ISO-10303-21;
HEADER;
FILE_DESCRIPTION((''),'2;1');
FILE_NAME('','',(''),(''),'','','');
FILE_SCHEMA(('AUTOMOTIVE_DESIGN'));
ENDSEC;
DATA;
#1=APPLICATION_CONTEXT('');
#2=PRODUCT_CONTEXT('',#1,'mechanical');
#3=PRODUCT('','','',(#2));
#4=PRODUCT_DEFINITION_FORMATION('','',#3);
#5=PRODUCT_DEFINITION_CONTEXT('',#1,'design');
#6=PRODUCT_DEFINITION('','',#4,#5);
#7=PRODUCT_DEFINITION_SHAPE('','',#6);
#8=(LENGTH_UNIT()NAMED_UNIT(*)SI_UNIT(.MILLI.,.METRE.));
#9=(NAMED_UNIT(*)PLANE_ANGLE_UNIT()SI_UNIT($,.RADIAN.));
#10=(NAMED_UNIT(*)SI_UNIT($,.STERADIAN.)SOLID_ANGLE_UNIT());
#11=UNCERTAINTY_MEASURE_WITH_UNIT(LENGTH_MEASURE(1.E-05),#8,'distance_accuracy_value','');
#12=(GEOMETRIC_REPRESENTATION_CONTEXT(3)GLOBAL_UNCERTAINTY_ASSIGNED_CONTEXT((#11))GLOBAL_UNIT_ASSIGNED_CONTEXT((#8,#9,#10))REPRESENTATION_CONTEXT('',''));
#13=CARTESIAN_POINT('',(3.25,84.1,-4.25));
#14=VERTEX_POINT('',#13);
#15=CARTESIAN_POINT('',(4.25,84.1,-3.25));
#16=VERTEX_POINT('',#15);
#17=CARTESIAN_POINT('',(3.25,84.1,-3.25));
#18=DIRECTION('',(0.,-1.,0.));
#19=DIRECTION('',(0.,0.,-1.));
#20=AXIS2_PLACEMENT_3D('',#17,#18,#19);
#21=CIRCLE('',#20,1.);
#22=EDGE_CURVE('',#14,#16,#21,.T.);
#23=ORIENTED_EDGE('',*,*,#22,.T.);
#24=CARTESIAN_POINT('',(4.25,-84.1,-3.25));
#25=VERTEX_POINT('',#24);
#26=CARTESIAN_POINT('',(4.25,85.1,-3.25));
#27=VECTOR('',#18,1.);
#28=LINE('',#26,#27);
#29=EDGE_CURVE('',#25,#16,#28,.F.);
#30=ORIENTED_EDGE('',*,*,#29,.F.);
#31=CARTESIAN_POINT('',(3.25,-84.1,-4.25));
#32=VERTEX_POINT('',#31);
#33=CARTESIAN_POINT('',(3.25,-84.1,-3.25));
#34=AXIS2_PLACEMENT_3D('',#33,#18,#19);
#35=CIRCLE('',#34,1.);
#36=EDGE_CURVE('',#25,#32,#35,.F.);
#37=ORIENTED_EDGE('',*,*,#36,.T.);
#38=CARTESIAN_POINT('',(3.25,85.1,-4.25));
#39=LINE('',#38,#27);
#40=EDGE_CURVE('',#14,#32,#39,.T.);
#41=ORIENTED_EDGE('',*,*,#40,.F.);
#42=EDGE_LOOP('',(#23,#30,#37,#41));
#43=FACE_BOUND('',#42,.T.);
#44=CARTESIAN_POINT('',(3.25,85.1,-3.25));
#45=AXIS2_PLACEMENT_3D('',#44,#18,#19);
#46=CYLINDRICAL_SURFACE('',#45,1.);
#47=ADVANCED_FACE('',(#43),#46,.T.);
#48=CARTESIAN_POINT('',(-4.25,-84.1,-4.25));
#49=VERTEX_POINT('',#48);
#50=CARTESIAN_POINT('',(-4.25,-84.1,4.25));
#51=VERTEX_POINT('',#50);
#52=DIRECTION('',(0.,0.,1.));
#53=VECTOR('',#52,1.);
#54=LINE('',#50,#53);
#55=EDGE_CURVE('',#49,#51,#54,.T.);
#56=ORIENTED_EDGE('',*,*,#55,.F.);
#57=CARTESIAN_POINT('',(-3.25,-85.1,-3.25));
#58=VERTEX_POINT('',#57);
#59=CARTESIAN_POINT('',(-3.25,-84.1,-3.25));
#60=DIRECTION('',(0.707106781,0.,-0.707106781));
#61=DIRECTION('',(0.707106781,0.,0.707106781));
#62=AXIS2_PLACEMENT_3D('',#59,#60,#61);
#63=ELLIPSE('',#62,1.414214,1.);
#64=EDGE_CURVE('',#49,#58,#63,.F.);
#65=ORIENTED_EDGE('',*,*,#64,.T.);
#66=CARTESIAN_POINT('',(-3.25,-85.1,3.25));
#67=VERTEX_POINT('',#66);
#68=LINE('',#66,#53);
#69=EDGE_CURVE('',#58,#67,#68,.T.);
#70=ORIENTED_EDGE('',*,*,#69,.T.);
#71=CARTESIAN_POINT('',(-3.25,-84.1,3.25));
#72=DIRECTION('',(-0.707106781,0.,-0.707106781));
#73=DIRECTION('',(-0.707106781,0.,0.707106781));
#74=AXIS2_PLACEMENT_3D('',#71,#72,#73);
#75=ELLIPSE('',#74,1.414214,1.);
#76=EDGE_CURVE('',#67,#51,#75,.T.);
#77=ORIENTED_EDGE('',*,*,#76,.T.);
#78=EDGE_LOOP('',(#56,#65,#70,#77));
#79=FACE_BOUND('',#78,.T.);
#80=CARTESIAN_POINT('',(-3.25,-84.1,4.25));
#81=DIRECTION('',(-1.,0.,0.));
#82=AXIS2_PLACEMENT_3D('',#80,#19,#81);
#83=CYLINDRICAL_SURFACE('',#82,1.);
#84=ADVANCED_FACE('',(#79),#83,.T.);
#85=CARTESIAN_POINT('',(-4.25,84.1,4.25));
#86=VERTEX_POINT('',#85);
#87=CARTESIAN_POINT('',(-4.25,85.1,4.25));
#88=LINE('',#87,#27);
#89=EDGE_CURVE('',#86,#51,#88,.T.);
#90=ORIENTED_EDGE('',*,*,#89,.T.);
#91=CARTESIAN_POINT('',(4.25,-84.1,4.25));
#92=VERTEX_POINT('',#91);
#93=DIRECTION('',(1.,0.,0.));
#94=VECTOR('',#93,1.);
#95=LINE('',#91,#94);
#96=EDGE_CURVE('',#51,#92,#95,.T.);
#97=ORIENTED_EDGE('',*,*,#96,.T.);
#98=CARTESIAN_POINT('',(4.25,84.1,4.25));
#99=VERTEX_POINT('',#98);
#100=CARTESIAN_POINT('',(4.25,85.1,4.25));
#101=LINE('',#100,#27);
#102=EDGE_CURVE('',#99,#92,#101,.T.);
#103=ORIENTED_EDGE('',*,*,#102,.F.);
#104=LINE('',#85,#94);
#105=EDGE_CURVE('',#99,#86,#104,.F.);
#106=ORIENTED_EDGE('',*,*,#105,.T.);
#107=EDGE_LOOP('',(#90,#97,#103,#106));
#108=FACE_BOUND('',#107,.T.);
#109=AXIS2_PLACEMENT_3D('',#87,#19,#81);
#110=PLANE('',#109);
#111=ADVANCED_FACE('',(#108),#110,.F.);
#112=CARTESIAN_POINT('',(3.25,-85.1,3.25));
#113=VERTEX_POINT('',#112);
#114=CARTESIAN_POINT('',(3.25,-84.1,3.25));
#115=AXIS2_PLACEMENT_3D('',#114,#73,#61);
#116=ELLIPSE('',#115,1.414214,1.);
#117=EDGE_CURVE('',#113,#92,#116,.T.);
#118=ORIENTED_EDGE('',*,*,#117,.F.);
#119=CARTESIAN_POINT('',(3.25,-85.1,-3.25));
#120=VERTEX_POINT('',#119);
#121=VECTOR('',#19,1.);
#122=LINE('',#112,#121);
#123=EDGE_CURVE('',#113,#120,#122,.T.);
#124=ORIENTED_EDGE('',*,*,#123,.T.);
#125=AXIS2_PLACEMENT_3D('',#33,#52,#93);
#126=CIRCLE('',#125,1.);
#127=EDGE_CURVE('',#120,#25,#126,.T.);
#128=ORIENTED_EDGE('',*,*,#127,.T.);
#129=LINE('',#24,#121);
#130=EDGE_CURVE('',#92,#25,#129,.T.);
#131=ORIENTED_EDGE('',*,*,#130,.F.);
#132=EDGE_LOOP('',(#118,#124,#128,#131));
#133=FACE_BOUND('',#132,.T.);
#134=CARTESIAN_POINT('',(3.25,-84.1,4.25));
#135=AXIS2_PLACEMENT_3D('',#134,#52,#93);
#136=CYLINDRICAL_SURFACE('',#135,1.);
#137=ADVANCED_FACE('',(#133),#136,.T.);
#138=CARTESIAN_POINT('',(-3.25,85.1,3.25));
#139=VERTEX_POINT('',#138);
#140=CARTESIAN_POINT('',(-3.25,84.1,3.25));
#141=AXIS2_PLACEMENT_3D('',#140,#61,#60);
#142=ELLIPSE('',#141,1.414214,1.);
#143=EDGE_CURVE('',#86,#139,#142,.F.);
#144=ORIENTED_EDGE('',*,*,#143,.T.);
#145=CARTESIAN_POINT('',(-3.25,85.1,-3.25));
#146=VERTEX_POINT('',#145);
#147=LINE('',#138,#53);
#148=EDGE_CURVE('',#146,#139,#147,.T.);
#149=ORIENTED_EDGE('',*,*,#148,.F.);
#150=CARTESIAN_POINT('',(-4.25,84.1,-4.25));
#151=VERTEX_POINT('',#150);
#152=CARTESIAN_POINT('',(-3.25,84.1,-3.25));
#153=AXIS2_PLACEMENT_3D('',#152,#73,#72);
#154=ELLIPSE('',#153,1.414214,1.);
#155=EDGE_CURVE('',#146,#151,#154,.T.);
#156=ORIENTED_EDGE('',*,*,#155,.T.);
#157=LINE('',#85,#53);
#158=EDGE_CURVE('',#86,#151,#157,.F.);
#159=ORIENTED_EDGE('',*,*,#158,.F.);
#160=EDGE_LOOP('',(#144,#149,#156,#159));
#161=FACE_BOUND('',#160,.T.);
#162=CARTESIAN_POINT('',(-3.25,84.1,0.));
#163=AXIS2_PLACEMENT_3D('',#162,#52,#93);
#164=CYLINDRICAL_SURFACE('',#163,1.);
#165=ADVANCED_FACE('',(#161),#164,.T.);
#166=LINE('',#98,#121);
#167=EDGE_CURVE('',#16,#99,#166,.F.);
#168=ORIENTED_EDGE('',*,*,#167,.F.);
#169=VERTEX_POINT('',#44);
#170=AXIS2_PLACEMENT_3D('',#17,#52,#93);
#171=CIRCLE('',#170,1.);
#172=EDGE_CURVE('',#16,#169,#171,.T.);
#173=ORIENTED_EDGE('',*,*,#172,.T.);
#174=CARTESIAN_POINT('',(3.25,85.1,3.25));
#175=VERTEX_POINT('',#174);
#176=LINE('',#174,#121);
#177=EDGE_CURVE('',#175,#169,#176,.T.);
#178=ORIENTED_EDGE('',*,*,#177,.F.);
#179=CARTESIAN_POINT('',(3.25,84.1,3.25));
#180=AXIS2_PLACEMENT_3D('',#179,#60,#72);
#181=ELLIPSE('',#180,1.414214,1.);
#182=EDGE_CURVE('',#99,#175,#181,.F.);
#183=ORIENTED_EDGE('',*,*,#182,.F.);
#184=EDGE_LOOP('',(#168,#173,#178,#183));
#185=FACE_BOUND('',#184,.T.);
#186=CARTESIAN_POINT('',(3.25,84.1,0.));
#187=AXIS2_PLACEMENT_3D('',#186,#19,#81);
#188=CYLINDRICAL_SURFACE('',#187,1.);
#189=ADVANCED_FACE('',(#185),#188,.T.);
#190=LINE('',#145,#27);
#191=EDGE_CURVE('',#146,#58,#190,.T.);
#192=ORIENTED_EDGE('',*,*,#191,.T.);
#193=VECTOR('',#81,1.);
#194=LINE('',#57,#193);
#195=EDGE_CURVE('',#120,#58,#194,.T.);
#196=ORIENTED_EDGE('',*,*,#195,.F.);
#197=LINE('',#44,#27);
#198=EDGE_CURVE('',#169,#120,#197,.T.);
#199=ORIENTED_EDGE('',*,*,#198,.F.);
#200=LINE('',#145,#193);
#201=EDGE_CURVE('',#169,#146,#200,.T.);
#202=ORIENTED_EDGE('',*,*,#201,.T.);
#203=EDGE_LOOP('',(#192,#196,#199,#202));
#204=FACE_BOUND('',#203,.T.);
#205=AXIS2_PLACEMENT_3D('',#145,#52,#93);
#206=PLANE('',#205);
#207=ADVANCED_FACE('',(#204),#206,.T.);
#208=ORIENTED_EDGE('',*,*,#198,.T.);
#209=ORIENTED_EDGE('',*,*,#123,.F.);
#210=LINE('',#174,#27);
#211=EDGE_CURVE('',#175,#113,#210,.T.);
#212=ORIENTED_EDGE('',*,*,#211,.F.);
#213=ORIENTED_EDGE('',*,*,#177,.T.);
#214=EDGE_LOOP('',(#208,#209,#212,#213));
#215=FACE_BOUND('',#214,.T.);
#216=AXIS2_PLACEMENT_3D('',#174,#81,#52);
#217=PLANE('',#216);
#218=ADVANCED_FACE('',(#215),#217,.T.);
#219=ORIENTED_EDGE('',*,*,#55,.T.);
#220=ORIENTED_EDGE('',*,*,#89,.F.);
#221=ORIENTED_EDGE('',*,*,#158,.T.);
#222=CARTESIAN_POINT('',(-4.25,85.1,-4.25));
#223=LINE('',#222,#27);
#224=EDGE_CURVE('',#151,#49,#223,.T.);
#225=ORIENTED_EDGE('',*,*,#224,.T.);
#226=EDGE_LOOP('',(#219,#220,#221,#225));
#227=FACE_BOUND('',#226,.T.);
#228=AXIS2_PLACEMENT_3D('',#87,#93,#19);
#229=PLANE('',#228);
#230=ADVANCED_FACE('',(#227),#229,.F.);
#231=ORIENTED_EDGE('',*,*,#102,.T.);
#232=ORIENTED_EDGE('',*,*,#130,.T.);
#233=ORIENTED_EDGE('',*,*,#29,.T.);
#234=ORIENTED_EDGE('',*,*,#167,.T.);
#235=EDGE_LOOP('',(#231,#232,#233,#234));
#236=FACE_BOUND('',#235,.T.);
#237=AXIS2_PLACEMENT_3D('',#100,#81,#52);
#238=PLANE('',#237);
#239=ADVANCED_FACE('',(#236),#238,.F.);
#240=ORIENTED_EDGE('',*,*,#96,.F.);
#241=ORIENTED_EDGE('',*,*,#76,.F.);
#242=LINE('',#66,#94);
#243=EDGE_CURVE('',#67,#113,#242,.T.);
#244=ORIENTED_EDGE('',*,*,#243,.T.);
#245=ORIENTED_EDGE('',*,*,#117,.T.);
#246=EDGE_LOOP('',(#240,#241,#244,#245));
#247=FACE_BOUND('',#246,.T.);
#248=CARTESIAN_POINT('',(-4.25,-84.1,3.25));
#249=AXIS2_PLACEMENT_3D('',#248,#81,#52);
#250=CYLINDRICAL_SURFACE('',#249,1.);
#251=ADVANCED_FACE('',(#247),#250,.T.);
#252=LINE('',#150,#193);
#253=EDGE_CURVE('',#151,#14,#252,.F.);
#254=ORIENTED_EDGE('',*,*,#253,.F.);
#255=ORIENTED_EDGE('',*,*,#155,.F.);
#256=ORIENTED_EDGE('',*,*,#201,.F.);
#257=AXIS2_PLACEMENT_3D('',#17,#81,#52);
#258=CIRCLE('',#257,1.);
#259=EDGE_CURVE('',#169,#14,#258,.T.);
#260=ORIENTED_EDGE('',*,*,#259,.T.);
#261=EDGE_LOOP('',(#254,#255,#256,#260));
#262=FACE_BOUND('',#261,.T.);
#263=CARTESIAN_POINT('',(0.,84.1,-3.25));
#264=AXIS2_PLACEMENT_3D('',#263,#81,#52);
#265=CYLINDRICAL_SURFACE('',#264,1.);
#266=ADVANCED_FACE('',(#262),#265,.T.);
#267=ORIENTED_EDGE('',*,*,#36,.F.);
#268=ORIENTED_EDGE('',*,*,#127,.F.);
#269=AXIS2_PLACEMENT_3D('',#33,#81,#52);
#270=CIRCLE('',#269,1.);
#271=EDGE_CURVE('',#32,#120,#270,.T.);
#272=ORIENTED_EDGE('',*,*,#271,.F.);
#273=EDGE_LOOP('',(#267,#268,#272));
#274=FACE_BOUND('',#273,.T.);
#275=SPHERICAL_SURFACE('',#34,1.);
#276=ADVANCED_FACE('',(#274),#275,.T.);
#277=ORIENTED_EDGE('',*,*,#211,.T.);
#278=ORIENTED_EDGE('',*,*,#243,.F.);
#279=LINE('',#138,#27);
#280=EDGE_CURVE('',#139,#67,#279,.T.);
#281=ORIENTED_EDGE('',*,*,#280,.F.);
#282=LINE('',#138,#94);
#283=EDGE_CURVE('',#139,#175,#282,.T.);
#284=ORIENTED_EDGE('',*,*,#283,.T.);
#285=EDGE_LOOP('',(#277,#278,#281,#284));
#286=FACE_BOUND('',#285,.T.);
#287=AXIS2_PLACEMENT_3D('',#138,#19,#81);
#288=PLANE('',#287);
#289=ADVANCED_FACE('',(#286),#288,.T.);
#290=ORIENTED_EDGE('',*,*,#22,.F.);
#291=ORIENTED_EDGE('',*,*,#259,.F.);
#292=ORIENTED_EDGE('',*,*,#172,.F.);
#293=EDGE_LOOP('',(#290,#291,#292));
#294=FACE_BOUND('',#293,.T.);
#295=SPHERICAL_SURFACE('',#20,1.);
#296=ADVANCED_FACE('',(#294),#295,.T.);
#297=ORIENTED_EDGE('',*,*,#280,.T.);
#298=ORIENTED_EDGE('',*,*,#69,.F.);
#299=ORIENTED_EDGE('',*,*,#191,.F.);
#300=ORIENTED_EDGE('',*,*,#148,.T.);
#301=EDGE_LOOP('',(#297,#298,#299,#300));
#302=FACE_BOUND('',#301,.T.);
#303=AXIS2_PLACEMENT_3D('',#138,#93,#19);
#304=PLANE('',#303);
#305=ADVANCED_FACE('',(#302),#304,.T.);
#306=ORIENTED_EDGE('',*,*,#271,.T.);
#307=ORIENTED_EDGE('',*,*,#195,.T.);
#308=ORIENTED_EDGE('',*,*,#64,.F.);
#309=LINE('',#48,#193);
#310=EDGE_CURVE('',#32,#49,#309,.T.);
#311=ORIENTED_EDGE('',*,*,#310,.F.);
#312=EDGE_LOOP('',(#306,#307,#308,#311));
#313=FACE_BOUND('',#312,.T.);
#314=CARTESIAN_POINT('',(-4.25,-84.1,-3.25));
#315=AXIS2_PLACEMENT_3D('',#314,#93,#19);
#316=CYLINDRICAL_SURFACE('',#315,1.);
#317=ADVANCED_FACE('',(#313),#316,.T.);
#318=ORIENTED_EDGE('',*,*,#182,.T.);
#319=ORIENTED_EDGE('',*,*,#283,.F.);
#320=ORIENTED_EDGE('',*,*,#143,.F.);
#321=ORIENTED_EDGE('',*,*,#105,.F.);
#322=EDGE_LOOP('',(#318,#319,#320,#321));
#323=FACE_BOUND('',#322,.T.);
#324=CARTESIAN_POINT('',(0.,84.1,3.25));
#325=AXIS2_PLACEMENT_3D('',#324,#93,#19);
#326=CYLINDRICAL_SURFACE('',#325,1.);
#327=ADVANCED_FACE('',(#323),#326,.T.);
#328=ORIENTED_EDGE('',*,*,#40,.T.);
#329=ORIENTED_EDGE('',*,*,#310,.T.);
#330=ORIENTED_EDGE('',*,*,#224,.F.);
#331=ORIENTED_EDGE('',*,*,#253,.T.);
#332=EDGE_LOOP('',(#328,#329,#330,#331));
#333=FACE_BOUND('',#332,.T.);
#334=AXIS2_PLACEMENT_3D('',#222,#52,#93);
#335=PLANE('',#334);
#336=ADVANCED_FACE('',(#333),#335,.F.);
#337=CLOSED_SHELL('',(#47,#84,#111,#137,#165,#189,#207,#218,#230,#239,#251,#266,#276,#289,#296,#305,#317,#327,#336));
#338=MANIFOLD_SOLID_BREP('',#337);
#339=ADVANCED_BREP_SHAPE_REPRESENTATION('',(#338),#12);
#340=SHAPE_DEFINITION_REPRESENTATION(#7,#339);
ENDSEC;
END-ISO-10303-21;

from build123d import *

# Parameters (mm, degrees)
SKETCH1_W           = 8.5
SKETCH1_H           = 8.5
SKETCH1_W_2         = 6.5
SKETCH1_H_2         = 6.5
BOSS_EXTRUDE1_DEPTH = 85.1
FILLET1_R           = 1
FILLET2_R           = 1
FILLET3_R           = 1


with BuildPart() as part:
    # Sketch1 → Boss-Extrude1 (new, symmetric)
    with BuildSketch(Plane(origin=(0, 0, 0), x_dir=(1, 0, 0), z_dir=(0, 1, 0))):
        Rectangle(SKETCH1_W, SKETCH1_H)
        Rectangle(SKETCH1_W_2, SKETCH1_H_2, mode=Mode.SUBTRACT)
    extrude(amount=BOSS_EXTRUDE1_DEPTH, both=True)

    # Fillet1
    fillet1_edges = [part.edges().sort_by_distance(p)[0] for p in [
        (4.25, 0, -4.25),
    ]]
    fillet(fillet1_edges, radius=FILLET1_R)

    # Fillet2
    fillet2_edges = [part.edges().sort_by_distance(p)[0] for p in [
        (-4.25, 85.1, 0),
        (0, 85.1, 4.25),
        (-0.5, 85.1, -4.25),
        (3.957106781, 85.1, -3.957106781),
        (4.25, 85.1, 0.5),
    ]]
    fillet(fillet2_edges, radius=FILLET2_R - 0.0001)  # a hair under: the kernel refuses the full size

    # Fillet3
    fillet3_edges = [part.edges().sort_by_distance(p)[0] for p in [
        (-0.5, -85.1, -4.25),
        (3.957106781, -85.1, -3.957106781),
        (0, -85.1, 4.25),
        (-4.25, -85.1, 0),
        (4.25, -85.1, 0.5),
    ]]
    fillet(fillet3_edges, radius=FILLET3_R - 0.0001)  # a hair under: the kernel refuses the full size


solid = part.part
